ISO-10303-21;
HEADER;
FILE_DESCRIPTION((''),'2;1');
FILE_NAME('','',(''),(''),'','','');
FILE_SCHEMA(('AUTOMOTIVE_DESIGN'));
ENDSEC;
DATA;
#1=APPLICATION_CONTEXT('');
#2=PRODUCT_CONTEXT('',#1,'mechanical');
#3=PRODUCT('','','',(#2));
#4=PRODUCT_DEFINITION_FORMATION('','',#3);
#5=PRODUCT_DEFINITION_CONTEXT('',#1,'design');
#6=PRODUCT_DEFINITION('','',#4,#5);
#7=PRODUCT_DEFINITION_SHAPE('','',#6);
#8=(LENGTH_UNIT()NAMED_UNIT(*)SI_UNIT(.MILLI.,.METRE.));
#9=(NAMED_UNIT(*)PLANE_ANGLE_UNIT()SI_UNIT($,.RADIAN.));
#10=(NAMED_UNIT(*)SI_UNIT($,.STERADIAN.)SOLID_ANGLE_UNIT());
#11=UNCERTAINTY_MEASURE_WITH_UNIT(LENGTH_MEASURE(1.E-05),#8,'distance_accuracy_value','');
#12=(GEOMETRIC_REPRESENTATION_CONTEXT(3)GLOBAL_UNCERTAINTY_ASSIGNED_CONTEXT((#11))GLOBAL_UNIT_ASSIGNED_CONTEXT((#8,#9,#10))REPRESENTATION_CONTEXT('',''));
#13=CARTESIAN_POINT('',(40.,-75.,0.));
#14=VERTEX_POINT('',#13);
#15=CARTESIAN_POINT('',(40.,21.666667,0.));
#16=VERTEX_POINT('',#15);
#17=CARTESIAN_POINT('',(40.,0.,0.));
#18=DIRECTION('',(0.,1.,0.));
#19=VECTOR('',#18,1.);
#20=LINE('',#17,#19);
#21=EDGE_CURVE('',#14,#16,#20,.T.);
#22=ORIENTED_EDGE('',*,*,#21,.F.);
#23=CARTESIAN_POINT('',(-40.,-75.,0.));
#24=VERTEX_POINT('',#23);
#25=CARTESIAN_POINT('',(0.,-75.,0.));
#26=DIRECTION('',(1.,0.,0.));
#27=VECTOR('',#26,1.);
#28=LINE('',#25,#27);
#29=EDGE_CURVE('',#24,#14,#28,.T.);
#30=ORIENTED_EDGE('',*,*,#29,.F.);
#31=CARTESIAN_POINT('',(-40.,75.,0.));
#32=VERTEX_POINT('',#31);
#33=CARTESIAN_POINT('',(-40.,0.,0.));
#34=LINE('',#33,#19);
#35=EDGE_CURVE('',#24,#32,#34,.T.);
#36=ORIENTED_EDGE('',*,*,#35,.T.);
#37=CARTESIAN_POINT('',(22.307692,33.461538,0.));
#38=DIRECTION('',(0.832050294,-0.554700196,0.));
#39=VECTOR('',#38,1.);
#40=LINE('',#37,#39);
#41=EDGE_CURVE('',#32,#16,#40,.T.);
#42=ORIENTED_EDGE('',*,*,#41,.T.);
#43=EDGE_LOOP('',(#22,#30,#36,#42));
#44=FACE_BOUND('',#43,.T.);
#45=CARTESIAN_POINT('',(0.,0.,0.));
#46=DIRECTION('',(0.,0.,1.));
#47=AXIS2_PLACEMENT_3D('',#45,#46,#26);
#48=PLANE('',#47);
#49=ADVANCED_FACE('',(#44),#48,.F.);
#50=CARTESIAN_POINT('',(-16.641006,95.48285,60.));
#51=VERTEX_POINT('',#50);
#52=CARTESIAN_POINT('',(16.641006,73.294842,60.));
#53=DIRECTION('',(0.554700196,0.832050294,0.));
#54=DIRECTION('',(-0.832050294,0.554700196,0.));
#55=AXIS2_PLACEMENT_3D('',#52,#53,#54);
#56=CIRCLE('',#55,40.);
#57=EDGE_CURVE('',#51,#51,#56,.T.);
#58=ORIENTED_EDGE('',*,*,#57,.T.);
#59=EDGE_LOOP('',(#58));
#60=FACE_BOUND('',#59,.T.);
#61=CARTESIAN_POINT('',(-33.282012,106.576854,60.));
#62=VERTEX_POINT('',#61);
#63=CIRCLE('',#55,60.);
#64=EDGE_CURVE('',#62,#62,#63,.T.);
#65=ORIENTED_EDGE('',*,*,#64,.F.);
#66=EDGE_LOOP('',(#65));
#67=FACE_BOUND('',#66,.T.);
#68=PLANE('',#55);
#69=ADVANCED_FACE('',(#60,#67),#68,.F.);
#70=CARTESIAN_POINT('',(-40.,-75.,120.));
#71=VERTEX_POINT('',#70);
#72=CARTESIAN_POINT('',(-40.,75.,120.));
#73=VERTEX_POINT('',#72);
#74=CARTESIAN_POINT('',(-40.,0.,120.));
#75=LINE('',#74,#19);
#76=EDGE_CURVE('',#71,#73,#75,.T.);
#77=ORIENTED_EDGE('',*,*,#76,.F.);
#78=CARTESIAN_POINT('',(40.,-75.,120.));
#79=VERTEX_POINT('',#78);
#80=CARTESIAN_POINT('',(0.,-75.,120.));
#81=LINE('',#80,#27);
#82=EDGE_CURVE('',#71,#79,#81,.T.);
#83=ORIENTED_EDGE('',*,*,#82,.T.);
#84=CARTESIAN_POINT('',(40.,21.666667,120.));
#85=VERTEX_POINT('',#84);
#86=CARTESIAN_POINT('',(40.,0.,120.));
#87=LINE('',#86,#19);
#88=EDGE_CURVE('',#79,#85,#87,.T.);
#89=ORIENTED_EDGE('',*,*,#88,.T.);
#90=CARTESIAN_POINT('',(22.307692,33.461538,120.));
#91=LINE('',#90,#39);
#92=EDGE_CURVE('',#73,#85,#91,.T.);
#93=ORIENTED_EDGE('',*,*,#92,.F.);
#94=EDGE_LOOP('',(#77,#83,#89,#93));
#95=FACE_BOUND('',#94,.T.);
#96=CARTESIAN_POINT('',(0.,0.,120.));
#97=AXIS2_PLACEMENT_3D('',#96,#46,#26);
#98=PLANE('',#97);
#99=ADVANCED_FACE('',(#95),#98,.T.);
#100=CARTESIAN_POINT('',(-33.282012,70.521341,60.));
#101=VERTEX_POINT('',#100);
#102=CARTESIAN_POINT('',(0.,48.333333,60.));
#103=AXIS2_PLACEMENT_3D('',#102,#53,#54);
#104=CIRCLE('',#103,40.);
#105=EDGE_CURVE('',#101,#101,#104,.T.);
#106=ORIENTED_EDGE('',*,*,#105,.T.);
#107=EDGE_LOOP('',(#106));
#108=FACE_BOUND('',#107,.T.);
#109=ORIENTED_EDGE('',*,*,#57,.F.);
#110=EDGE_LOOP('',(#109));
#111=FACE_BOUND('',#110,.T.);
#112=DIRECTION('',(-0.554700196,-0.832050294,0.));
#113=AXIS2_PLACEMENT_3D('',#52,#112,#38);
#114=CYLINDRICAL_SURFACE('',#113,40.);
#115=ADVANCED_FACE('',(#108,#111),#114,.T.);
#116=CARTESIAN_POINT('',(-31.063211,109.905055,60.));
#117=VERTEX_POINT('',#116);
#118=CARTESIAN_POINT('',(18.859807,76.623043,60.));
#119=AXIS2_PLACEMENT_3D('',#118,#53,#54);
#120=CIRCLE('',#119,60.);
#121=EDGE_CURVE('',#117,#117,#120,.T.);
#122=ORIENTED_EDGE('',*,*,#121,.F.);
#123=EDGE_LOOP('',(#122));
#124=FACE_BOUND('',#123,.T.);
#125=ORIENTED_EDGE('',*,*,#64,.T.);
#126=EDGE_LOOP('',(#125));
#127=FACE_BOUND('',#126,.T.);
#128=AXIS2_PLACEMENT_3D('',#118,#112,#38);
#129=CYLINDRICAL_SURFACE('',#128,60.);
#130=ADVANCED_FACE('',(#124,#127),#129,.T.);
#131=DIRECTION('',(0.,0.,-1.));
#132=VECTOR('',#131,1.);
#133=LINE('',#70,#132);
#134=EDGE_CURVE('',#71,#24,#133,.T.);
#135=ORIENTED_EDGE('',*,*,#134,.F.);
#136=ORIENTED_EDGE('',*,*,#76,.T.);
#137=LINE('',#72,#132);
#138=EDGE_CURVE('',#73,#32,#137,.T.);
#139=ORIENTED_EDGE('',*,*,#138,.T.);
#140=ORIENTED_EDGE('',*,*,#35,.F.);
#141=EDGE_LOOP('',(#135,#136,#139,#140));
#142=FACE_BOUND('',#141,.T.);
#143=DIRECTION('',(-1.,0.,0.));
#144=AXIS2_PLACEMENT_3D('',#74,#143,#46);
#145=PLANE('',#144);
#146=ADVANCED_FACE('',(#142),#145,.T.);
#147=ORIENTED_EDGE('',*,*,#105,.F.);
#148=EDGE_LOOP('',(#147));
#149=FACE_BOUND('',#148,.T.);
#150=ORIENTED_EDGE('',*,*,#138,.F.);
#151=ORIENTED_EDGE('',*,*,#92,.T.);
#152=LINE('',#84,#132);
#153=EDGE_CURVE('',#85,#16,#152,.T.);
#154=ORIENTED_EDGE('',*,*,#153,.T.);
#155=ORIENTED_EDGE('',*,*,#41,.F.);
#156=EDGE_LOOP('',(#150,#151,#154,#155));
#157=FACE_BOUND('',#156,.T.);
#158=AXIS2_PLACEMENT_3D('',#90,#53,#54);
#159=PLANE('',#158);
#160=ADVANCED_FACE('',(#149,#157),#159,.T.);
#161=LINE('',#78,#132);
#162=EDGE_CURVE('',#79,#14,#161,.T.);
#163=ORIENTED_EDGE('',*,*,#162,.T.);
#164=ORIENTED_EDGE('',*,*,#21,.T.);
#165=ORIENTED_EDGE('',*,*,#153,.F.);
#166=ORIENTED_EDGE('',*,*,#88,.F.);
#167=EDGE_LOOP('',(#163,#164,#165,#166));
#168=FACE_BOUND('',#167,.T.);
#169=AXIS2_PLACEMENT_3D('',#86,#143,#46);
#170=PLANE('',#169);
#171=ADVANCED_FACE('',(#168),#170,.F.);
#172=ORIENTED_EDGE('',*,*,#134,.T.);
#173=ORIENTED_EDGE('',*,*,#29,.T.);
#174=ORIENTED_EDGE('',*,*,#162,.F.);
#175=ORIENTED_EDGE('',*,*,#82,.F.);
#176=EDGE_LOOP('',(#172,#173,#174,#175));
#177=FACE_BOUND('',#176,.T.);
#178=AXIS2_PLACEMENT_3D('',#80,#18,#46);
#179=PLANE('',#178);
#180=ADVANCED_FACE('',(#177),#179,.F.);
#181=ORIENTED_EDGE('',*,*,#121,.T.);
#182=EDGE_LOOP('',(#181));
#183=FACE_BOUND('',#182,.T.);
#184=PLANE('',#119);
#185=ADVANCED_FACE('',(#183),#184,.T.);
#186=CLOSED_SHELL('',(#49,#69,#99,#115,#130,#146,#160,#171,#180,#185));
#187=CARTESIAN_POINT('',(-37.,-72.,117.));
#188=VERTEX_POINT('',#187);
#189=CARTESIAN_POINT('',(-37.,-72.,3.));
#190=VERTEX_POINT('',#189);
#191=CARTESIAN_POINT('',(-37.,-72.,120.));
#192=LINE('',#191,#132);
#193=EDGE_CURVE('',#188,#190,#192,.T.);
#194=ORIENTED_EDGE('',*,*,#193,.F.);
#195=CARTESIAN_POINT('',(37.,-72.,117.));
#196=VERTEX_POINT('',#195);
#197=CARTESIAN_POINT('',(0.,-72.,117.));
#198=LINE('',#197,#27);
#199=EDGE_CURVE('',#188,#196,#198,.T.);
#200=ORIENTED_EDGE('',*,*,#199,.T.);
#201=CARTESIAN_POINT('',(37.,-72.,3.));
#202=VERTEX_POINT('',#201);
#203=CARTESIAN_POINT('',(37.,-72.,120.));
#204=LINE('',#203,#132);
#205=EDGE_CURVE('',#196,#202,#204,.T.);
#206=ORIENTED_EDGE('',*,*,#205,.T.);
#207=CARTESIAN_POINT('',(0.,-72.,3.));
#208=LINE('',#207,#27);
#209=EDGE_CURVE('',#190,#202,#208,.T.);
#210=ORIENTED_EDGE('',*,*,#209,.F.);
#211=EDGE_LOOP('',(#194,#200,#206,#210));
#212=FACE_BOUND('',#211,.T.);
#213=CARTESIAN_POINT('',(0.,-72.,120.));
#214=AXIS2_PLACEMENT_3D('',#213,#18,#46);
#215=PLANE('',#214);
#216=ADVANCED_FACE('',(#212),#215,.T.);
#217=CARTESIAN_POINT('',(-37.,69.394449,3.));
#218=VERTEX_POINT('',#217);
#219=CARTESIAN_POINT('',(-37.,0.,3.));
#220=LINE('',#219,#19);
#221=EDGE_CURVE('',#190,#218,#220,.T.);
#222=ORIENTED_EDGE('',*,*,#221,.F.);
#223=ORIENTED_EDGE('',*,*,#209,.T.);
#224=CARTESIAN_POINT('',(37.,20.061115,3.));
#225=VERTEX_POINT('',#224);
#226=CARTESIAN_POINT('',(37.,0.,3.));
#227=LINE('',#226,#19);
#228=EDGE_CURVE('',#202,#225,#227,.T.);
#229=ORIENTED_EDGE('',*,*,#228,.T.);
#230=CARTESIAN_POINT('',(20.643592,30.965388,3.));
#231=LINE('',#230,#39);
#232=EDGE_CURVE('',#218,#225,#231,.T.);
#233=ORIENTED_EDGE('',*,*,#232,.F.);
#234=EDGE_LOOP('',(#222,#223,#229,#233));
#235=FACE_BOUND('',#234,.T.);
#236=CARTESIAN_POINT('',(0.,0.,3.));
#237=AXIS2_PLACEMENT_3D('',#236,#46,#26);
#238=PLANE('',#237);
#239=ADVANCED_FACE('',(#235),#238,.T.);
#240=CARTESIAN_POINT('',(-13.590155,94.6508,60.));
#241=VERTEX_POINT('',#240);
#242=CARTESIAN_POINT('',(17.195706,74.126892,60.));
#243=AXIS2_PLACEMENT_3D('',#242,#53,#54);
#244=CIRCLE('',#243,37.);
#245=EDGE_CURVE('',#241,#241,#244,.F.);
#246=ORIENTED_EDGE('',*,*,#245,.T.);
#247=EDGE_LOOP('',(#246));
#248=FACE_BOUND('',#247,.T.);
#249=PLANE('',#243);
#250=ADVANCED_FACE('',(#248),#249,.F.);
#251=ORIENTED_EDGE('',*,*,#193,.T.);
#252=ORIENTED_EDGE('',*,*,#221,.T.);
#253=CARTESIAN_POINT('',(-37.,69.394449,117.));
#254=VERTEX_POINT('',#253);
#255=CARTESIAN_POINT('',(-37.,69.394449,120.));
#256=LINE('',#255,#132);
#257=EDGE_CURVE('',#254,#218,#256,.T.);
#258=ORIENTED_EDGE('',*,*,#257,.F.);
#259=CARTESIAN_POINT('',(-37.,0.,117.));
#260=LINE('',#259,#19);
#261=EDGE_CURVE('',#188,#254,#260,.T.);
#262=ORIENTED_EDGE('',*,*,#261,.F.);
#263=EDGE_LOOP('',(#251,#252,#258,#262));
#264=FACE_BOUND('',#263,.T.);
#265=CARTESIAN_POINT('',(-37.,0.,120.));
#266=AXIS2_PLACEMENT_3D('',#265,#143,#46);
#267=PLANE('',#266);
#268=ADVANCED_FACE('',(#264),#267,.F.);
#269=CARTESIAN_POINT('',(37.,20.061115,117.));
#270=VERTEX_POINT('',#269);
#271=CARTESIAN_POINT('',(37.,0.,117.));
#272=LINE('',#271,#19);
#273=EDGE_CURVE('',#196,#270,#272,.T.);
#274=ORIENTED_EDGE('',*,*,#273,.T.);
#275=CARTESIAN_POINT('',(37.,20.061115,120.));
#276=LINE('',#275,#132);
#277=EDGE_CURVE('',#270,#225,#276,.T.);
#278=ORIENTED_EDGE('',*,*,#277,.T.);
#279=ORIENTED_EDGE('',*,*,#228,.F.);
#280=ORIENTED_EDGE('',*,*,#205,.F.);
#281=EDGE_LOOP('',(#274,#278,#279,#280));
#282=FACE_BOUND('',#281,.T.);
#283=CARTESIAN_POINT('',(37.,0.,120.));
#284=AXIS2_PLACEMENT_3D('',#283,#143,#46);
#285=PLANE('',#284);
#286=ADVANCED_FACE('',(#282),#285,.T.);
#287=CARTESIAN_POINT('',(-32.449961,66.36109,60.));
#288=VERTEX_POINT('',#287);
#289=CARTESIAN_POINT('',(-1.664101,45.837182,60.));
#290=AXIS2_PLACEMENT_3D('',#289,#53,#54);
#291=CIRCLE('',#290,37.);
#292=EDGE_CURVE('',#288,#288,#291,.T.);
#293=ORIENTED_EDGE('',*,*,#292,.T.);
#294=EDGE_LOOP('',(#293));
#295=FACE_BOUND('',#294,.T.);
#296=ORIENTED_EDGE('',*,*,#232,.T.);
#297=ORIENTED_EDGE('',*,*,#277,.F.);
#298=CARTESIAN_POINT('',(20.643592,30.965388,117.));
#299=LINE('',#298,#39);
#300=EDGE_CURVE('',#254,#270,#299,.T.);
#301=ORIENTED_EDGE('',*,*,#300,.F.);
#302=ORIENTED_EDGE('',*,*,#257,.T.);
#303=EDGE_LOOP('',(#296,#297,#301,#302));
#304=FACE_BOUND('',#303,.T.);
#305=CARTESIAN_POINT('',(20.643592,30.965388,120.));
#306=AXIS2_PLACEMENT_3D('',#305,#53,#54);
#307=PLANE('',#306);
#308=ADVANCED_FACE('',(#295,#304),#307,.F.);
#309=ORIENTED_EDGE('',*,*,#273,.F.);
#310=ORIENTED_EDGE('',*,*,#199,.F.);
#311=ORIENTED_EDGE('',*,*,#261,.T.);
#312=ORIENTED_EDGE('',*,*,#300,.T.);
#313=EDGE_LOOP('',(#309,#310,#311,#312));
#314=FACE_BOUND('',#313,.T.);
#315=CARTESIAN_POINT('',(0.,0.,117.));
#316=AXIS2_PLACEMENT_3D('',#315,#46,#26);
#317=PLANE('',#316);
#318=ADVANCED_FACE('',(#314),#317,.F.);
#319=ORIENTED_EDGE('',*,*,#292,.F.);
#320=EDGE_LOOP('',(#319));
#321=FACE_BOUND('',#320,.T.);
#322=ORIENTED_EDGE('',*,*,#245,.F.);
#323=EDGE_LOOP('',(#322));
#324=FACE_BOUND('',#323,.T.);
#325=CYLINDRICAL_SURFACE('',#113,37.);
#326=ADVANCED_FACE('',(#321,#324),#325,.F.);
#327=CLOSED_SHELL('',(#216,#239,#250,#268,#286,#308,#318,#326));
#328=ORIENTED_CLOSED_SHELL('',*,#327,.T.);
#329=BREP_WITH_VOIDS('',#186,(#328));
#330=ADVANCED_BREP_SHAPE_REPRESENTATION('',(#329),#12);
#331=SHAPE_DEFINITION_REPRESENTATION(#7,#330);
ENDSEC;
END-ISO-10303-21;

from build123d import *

# Parameters (mm, degrees)
BOSS_EXTRUDE1_DEPTH = 120
SKETCH2_R           = 40
BOSS_EXTRUDE2_DEPTH = 30
SKETCH4_R           = 60
BOSS_EXTRUDE3_DEPTH = 4
SHELL1_START        = 3
SHELL1_DEPTH        = 114
SHELL1_START_2      = 37.215764226
SHELL1_2_OUTLINE_R  = 37
SHELL1_2_DEPTH      = 34


with BuildPart() as part:
    # Sketch1 → Boss-Extrude1 (new body)
    with BuildSketch(Plane.XY):
        Polygon((40, 21.666666667), (-40, 75), (-40, -75), (40, -75), align=None)
    extrude(amount=BOSS_EXTRUDE1_DEPTH)

    # Sketch2 → Boss-Extrude2 (add)
    with BuildSketch(Plane(origin=(22.307692308, 33.461538462, 0), x_dir=(0, 0, -1), z_dir=(0.5547001962252291, 0.8320502943378437, 0))):
        with Locations(Location((-60, 26.810509484, 0), (0, 0, 90))):
            Circle(SKETCH2_R)
    extrude(amount=BOSS_EXTRUDE2_DEPTH)

    # Sketch4 → Boss-Extrude3 (add)
    with BuildSketch(Plane(origin=(38.948698194, 58.423047292, 0), x_dir=(0, 0, -1), z_dir=(0.5547001962252291, 0.8320502943378437, 0))):
        with Locations(Location((-60, 26.810509484, 0), (0, 0, 90))):
            Circle(SKETCH4_R)
    extrude(amount=BOSS_EXTRUDE3_DEPTH)

    # Shell1: read off the stored shape, not the designer's step
    # Shell1 outline → Shell1 (cut)
    with BuildSketch(Plane.XY.offset(SHELL1_START)):
        Polygon((-37, -72), (37, -72), (37, 20.061115391), (-37, 69.394448725), align=None)
    extrude(amount=SHELL1_DEPTH, mode=Mode.SUBTRACT)

    # Shell1 2 outline → Shell1 2 (cut)
    with BuildSketch(Plane(origin=(0, 0, 0), x_dir=(0.8320502943378438, -0.5547001962252289, 0), z_dir=(0.5547001962252289, 0.8320502943378438, 0)).offset(SHELL1_START_2)):
        with Locations((-26.810509484, -60)):
            Circle(SHELL1_2_OUTLINE_R)
    extrude(amount=SHELL1_2_DEPTH, mode=Mode.SUBTRACT)


solid = part.part
